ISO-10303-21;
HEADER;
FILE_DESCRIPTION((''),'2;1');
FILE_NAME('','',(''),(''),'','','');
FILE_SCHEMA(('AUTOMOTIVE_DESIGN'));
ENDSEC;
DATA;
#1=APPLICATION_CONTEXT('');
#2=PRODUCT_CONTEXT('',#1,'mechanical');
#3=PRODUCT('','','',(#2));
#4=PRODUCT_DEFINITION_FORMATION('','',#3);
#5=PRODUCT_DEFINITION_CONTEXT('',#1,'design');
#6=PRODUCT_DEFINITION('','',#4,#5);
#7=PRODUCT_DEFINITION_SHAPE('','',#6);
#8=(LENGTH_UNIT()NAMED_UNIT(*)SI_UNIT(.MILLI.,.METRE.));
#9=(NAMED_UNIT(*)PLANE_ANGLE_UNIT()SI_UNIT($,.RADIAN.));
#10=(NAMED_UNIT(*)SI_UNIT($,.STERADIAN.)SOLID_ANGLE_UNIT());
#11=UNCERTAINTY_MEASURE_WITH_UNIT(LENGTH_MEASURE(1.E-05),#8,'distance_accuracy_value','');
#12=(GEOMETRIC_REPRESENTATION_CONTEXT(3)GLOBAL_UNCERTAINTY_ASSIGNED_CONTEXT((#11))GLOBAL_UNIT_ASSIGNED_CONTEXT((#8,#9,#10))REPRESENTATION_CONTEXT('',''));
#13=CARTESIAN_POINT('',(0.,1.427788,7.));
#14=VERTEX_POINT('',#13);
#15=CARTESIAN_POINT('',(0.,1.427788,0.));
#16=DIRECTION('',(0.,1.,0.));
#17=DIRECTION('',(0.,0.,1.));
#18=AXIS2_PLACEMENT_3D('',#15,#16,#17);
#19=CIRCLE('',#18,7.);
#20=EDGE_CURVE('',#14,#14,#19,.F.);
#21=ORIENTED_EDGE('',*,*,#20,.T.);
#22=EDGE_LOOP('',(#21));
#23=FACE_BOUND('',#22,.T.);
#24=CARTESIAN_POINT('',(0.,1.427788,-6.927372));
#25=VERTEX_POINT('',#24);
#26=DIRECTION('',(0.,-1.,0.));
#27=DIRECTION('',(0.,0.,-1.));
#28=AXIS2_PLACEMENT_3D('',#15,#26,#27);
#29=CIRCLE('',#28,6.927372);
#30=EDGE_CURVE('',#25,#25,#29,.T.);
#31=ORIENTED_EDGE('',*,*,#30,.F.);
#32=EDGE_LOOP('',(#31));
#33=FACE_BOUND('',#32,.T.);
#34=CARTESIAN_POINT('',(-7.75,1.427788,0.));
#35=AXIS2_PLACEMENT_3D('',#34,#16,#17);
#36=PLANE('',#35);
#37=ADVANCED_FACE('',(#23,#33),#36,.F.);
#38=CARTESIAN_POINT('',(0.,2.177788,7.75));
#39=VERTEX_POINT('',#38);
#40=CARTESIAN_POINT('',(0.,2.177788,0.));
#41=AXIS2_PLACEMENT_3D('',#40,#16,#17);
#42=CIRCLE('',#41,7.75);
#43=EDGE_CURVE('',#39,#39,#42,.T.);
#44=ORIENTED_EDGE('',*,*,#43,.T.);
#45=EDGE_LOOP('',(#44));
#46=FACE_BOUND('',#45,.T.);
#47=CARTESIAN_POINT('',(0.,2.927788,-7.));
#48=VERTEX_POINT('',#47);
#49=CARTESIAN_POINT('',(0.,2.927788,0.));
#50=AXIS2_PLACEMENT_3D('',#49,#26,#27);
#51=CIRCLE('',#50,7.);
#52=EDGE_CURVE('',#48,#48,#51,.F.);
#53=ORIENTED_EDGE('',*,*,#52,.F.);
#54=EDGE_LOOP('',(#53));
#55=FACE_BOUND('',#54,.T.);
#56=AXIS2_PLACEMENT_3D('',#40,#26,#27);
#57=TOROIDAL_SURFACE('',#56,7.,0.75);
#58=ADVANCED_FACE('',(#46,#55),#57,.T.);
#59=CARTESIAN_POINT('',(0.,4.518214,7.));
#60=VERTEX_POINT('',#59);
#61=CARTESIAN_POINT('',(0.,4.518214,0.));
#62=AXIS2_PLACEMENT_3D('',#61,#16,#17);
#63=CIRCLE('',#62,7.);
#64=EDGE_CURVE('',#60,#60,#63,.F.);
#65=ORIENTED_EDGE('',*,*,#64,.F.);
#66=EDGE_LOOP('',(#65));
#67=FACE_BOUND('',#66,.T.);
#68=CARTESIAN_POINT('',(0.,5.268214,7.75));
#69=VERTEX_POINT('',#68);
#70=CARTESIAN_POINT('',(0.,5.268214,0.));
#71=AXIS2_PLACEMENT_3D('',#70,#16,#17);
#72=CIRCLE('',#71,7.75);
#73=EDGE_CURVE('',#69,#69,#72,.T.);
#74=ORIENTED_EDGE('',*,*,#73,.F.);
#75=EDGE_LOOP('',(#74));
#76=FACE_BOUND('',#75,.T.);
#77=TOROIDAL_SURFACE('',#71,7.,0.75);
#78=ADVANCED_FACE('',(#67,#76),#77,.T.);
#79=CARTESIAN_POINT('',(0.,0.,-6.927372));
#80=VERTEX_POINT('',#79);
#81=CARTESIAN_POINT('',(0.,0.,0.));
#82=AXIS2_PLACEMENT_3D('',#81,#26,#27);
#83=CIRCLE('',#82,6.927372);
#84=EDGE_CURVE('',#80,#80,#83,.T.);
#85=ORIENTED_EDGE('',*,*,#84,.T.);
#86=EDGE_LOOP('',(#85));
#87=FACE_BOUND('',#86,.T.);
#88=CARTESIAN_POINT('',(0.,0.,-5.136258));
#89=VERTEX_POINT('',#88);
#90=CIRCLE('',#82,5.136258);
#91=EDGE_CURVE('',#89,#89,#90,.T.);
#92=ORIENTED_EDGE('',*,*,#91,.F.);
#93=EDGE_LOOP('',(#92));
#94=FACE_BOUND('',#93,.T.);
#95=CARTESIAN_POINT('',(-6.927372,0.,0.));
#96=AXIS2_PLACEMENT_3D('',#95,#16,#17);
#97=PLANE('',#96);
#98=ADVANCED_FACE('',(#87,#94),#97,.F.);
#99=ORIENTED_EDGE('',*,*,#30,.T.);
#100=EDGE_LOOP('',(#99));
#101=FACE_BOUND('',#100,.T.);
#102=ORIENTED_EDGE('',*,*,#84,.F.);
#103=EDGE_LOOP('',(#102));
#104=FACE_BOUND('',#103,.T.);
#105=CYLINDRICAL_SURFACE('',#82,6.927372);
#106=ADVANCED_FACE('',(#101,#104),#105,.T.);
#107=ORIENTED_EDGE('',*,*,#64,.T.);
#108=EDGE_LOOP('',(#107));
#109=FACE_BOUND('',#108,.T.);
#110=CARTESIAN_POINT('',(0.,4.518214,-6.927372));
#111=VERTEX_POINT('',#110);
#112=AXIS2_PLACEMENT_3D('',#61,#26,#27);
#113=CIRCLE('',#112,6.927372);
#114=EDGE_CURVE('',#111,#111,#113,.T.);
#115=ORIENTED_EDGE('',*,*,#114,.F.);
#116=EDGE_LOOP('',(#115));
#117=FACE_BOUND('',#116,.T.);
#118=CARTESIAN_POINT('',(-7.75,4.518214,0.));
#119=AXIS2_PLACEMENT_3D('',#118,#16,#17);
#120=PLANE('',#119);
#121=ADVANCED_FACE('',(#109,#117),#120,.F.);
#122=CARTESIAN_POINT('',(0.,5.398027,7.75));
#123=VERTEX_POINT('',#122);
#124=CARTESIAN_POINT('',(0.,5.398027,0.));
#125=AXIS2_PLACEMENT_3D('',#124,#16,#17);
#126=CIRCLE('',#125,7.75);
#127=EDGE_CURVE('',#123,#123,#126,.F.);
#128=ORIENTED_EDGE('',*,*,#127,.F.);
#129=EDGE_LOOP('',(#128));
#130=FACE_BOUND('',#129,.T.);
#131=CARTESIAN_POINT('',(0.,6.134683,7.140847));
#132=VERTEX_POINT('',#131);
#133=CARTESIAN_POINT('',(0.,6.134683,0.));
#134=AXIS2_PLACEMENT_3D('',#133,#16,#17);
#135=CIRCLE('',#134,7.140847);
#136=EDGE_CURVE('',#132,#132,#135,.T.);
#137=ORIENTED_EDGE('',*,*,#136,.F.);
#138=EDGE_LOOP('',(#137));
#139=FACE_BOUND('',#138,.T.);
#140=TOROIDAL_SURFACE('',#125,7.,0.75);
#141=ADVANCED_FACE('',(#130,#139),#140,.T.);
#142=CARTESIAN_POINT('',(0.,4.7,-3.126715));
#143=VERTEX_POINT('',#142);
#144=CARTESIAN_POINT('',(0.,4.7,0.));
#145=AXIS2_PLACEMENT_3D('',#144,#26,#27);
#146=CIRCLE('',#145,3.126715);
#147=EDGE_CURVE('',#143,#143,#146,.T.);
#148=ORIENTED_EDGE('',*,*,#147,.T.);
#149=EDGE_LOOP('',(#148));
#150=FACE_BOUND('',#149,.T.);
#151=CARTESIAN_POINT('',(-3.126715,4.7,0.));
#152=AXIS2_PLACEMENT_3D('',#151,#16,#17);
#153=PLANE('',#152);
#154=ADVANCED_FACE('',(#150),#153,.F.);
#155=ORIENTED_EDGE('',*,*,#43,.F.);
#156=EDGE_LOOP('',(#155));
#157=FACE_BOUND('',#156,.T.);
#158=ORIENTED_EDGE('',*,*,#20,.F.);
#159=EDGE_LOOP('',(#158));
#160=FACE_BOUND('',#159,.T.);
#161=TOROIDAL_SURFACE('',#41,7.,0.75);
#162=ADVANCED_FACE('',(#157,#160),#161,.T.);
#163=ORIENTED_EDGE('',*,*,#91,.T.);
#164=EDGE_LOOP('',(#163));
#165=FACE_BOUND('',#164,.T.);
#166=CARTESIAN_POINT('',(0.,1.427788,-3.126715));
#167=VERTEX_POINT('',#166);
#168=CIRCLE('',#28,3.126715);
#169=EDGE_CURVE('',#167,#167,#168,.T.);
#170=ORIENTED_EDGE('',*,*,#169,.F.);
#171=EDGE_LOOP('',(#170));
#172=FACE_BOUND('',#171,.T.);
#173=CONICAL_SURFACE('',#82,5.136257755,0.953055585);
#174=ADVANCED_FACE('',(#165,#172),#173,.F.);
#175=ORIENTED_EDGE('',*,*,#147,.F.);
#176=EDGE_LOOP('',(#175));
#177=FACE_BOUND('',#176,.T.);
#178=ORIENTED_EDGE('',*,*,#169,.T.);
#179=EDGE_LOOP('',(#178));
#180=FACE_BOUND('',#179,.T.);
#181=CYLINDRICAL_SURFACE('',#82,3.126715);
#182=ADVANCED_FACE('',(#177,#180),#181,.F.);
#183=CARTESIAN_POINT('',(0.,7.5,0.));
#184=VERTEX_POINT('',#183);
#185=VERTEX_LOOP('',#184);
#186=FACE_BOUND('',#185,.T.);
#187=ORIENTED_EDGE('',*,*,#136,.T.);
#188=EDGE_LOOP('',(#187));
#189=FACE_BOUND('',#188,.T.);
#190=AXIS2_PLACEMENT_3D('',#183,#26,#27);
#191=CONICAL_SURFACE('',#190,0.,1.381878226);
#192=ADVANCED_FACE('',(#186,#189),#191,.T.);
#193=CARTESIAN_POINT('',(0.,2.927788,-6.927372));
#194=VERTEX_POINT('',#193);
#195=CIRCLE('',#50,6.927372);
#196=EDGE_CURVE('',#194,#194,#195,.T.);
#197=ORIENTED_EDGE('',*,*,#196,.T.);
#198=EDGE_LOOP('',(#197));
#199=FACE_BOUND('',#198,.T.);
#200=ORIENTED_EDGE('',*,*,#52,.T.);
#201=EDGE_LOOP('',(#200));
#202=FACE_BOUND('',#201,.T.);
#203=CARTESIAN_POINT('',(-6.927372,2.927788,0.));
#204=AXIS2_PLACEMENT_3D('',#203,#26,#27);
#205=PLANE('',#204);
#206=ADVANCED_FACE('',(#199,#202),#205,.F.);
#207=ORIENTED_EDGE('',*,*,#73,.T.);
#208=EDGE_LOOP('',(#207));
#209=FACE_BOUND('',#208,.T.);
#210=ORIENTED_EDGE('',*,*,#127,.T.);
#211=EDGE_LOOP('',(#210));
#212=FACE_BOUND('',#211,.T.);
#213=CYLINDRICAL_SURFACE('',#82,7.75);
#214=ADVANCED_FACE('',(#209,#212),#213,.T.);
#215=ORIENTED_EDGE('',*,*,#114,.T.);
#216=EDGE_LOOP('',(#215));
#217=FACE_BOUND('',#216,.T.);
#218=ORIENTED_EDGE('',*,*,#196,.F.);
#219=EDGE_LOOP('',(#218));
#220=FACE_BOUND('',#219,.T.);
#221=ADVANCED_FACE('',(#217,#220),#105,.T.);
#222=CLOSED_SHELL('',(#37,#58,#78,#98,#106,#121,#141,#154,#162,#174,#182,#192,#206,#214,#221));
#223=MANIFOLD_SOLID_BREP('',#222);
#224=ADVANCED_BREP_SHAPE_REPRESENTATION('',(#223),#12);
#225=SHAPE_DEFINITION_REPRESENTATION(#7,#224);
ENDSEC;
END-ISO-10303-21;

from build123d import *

# Parameters (mm, degrees)
FILLET1_R = 0.75


with BuildPart() as part:
    # Sketch1 → Revolve1 (revolve)
    with BuildSketch(Plane.XY, mode=Mode.PRIVATE) as revolve1_sk:
        Polygon((0, 7.5), (-7.75, 6.018214298), (-7.75, 4.518214298), (-6.927372109, 4.518214298), (-6.927372109, 2.927787826), (-7.75, 2.927787826), (-7.75, 1.427787826), (-6.927372109, 1.427787826), (-6.927372109, 0), (-5.136257755, 0), (-3.126714823, 1.427787826), (-3.126714823, 4.7), (0, 4.7), align=None)
    revolve(revolve1_sk.sketch.rotate(Axis((0, 0, 0), (0, 1, 0)), 270), axis=Axis((0, 0, 0), (0, 1, 0)))

    # Fillet1
    fillet1_edges = [part.edges().sort_by_distance(p)[0] for p in [
        (0, 6.018214298, 7.75),
        (0, 4.518214298, 7.75),
        (0, 2.927787826, 7.75),
        (0, 1.427787826, 7.75),
    ]]
    fillet(fillet1_edges, radius=FILLET1_R - 0.0001)  # a hair under: the kernel refuses the full size


solid = part.part
